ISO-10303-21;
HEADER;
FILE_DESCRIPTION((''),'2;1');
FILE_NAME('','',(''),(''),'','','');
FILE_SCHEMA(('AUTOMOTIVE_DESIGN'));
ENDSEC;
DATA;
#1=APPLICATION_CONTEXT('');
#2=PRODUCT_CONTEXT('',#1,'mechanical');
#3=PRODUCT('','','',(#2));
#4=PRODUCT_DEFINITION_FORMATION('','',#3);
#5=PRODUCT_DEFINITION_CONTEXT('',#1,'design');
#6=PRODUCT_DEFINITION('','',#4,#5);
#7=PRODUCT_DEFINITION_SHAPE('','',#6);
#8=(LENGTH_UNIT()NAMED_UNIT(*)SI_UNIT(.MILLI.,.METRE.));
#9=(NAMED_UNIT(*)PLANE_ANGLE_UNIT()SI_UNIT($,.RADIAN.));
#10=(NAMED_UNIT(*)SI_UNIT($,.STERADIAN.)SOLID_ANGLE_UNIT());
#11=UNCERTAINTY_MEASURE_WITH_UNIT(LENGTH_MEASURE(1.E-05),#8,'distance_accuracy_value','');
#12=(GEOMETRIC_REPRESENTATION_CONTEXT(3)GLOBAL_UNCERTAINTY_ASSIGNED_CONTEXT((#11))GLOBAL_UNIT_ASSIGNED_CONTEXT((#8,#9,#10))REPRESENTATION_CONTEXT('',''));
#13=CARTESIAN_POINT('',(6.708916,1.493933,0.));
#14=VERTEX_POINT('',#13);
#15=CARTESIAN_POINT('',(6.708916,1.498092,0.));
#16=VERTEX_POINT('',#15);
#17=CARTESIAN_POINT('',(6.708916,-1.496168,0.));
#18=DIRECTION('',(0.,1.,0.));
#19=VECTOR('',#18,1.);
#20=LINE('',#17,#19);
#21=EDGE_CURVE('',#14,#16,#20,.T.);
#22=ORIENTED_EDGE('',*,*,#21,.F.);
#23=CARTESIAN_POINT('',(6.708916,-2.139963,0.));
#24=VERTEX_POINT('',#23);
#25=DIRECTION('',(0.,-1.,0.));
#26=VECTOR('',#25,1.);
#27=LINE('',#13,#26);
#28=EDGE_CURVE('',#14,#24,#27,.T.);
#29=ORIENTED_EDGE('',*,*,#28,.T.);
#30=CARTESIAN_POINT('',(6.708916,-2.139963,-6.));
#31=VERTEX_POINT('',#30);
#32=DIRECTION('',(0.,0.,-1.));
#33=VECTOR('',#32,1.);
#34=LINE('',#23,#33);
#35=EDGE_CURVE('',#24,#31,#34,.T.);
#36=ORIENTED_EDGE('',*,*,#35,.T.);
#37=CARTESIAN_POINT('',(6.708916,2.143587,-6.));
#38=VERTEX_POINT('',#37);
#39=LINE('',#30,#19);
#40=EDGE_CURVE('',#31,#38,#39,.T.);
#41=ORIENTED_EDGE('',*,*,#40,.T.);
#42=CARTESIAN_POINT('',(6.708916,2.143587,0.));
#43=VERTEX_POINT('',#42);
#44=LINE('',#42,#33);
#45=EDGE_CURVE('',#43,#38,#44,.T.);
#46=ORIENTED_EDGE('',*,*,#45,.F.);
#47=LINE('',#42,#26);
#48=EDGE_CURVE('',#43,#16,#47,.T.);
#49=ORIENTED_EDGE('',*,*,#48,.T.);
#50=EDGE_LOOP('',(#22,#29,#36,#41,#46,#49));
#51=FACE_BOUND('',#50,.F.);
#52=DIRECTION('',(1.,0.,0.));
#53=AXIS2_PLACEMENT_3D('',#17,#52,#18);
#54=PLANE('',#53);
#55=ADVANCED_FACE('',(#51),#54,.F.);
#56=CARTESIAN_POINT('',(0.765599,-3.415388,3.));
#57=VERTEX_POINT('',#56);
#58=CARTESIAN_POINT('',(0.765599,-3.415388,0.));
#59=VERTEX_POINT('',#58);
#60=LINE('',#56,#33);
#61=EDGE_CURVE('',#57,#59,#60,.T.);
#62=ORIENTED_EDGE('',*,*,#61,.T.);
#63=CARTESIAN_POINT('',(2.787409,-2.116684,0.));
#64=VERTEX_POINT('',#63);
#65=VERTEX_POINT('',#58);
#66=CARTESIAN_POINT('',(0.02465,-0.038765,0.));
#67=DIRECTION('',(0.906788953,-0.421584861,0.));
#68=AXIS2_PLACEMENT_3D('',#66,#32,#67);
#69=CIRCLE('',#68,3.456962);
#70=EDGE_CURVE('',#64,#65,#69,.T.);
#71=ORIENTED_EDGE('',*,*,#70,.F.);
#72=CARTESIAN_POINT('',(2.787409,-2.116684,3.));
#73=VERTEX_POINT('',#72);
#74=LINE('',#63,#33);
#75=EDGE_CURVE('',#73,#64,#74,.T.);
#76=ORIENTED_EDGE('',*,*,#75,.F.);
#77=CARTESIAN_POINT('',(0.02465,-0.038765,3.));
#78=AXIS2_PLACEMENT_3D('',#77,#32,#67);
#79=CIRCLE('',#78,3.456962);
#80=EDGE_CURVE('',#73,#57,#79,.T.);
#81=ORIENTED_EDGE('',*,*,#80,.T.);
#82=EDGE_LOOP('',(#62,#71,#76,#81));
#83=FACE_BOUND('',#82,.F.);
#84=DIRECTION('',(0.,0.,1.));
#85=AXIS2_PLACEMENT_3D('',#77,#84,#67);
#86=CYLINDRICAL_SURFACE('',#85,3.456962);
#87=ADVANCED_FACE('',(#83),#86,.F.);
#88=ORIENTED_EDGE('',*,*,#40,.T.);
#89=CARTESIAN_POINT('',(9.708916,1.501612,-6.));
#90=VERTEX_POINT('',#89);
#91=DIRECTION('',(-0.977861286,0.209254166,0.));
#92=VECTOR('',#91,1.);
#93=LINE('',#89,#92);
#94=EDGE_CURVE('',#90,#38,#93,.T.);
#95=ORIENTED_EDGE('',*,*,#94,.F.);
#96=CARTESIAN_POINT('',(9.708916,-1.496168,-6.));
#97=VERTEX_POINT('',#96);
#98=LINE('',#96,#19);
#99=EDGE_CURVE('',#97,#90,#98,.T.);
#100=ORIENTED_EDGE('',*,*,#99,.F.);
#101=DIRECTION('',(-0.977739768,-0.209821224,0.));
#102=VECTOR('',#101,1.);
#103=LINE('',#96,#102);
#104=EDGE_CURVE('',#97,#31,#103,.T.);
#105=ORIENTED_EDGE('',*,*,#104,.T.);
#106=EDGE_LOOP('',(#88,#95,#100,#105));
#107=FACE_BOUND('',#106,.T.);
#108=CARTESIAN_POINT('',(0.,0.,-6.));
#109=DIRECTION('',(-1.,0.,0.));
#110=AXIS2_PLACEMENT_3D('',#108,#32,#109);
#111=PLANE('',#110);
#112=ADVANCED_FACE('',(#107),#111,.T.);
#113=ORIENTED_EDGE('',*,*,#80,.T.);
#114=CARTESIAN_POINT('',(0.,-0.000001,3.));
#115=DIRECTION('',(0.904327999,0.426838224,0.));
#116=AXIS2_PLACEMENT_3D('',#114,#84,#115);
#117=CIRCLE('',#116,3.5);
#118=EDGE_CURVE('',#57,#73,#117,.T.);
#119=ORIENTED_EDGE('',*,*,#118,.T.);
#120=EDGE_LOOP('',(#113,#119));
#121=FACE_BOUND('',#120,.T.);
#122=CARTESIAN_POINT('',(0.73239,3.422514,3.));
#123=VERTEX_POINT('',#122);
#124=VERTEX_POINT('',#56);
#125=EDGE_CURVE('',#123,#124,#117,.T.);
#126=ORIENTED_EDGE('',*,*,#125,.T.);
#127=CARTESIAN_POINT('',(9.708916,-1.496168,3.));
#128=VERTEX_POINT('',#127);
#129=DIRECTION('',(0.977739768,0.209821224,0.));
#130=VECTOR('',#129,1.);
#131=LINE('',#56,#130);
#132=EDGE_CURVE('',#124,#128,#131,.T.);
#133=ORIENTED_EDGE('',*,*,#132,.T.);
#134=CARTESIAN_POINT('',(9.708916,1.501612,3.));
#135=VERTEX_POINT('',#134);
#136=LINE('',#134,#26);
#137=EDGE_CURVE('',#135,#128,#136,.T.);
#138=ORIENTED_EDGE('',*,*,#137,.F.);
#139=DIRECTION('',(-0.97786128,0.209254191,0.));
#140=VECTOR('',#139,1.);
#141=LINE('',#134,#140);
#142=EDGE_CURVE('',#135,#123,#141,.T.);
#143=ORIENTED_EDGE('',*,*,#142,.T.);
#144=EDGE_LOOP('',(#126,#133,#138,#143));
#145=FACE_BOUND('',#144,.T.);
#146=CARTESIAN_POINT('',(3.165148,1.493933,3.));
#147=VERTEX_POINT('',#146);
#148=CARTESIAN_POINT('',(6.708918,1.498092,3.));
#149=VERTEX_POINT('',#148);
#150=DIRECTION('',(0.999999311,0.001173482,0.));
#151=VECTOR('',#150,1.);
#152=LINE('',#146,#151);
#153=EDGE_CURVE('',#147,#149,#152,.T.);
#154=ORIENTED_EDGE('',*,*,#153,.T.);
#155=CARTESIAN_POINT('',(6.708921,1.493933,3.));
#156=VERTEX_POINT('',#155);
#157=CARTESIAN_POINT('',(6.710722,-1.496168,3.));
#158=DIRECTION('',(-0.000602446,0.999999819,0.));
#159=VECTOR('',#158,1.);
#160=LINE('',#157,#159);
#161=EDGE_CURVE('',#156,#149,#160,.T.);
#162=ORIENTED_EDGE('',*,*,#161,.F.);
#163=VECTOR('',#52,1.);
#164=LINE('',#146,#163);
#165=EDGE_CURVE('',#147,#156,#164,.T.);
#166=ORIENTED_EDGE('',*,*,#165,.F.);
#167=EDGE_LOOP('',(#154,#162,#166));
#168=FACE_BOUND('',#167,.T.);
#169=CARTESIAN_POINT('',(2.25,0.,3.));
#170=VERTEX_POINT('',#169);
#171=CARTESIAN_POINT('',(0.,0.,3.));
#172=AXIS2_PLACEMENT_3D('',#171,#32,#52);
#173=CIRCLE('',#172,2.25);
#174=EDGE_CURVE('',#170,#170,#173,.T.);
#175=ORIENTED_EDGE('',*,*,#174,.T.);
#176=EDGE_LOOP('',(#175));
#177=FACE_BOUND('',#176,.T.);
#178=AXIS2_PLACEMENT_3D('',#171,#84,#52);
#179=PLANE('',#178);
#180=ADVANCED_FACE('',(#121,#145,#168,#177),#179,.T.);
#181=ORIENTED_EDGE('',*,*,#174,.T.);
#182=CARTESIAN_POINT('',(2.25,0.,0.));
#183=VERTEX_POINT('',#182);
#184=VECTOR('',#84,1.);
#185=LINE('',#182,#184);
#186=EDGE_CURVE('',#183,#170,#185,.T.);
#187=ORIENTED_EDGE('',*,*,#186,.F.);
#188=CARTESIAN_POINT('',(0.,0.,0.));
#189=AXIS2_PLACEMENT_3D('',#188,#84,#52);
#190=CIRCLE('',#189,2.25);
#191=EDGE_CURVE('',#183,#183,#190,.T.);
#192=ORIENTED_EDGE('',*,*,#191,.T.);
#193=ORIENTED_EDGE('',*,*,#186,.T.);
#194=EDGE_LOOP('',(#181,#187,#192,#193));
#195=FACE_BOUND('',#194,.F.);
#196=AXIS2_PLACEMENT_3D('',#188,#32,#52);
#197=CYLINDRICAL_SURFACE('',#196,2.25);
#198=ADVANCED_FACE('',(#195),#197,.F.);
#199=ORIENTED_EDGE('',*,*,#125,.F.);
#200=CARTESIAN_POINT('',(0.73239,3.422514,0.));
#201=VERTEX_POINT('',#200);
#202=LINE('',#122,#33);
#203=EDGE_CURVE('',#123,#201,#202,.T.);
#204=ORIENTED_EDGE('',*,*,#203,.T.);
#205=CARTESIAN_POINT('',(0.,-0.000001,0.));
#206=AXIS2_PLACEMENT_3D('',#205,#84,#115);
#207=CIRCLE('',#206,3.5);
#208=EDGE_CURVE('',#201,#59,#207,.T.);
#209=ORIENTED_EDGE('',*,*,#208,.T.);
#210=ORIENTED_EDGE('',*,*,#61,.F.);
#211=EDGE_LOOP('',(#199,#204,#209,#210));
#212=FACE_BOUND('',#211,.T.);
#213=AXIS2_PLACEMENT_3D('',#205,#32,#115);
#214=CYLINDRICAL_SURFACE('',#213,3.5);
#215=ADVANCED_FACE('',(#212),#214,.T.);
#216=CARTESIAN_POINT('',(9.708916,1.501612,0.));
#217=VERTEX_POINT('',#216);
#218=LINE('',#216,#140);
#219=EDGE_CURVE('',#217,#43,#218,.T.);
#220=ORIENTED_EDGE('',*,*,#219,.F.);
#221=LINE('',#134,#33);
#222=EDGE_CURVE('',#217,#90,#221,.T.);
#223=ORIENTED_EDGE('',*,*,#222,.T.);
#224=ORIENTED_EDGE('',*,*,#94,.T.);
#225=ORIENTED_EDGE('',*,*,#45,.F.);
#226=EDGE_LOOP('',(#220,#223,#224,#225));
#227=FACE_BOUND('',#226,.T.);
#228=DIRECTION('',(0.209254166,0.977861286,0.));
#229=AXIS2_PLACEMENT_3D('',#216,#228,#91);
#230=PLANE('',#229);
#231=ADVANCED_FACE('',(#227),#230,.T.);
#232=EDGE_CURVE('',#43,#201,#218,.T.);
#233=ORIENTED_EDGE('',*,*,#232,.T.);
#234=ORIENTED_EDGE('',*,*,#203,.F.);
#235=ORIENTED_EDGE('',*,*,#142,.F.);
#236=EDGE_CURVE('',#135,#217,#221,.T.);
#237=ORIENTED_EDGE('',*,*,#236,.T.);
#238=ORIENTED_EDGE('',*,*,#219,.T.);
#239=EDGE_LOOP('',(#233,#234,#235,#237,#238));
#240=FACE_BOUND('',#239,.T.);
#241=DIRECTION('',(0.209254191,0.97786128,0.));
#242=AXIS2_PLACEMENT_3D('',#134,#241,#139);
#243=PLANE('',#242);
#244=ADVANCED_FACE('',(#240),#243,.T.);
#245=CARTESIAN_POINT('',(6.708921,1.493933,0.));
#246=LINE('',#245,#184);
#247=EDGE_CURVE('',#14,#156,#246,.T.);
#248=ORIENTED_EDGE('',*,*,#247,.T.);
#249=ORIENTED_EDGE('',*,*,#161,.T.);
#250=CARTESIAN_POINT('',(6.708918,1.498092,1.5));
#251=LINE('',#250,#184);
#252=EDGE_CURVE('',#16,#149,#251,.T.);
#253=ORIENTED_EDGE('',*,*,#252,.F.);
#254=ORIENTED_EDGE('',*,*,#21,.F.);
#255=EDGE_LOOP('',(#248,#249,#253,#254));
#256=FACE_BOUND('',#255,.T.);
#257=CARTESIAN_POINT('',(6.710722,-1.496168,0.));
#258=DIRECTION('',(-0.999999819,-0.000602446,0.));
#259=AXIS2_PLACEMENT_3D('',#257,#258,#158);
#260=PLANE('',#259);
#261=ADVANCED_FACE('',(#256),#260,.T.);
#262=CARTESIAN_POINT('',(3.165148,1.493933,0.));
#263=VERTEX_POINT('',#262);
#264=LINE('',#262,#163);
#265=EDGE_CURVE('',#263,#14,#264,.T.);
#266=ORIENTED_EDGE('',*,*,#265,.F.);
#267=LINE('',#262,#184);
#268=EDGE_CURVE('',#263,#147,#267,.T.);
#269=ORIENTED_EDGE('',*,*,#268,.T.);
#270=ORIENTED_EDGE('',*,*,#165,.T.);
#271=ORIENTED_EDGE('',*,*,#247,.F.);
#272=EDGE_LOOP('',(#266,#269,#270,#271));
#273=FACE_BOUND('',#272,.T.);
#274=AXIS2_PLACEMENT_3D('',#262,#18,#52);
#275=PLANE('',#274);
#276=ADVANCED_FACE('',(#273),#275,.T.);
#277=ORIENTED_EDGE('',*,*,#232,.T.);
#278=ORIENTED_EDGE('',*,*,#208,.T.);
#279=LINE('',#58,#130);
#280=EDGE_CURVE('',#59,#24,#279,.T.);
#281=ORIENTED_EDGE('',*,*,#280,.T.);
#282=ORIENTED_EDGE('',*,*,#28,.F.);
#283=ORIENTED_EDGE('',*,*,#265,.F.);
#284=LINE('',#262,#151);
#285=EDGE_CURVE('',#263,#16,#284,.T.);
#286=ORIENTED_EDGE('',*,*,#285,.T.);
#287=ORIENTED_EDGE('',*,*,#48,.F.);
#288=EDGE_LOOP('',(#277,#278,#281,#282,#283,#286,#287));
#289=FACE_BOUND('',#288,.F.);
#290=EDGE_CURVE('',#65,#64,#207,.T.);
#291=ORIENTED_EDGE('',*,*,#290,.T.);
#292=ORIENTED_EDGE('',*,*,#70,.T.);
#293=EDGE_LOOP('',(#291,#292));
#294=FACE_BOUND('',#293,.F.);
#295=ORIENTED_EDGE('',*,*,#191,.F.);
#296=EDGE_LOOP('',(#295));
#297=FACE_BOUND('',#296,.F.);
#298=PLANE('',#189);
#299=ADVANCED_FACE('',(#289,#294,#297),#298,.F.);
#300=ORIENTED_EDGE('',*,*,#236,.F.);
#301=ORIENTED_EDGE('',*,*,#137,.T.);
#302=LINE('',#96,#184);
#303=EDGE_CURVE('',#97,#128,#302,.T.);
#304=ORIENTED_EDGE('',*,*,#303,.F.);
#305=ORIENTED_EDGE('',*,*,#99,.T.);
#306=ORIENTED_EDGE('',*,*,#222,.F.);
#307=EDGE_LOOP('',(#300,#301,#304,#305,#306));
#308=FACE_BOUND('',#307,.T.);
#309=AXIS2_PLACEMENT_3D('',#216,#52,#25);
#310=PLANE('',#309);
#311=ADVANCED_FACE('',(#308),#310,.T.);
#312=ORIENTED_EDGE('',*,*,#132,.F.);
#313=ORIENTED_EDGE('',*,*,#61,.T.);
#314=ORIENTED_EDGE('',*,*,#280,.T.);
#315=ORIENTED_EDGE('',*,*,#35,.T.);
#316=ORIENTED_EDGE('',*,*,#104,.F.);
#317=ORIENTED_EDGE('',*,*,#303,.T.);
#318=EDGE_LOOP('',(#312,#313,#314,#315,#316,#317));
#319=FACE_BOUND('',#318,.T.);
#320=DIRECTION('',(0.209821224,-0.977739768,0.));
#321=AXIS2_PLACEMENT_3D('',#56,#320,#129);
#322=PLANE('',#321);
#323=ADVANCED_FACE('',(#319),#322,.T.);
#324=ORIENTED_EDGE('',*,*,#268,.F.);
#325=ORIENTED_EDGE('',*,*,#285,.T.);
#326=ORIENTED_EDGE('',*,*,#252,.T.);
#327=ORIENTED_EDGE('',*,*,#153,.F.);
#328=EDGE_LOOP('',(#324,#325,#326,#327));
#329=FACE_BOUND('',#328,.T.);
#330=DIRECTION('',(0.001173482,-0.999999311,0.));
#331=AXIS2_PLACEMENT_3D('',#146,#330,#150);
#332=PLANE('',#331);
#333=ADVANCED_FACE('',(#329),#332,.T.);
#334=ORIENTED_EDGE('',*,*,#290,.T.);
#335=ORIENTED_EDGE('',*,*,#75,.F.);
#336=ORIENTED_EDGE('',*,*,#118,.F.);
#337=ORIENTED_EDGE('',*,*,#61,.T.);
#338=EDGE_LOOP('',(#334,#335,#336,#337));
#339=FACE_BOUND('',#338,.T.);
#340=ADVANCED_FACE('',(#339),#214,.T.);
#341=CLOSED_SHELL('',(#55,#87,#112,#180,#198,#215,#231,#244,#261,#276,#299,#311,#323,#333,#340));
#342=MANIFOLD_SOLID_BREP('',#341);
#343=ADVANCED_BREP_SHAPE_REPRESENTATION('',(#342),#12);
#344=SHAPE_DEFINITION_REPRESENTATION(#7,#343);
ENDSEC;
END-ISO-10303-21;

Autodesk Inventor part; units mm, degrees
ref_plane "YZ Plane" through (0, 0, 0) normal (1, 0, 0) x (0, 1, 0)
ref_plane "XZ Plane" through (0, 0, 0) normal (0, 1, 0) x (-1, 0, 0)
ref_plane "XY Plane" through (0, 0, 0) normal (0, 0, 1) x (1, 0, 0)
sketch "Sketch1" plane through (0, 0, 0) normal (0, 0, 1) x (1, 0, 0)
  circle A0 centre (0, 0) radius 2.25
  arc A1 (3.165148, 1.493933) -> (3.159393, -1.506067) centre (0, 0) ccw
  line L0 (6.72439, -1.506067) -> (3.159393, -1.506067)
  line L1 (-0.27561, 3.050761) -> (6.72439, 3.050761) construction
  line L2 (1.598572, 1.503832) -> (1.673616, 1.503832)
  line L3 (3.165148, 1.493933) -> (6.72439, 1.493933)
  line L4 (6.72439, -1.506067) -> (6.72439, 1.493933)
  line L5 (6.72439, 1.493933) -> (6.72439, -1.506067)
  point P0 (7.357739, 0.5858)
  point P1 (6.72439, -0.006067)
  dimension "d0" = 4.5
  dimension "d1" = 7
  dimension "d3" = 7
  dimension "d13" = 3
extrude "Extrusion1" add sketch "Sketch1" along normal blind 3
sketch "Sketch2" plane through (0, 0, 0) normal (0, 0, -1) x (-1, 0, 0)
  line L0 (-6.708916, -1.496168) -> (-9.708916, -1.496168)
  line L1 (-9.708916, -1.496168) -> (-9.708916, 1.501612)
  line L2 (-9.708916, 1.501612) -> (-6.708916, 1.501612)
  line L3 (-6.708916, -1.496168) -> (-6.708916, 1.501612)
  line L4 (-3.159393, -1.506067) -> (-6.72439, -1.506067)
  point P0 (0, 0)
  point P1 (-9.708916, 0.002722)
  point P2 (-2.307375, -1.496168)
  point P3 (-6.72439, -1.506067)
  dimension "d7" = 3
extrude "Extrusion2" add sketch "Sketch2" along normal blind 6
sketch "Sketch6" plane through (0, 0, 0) normal (0, 0, 1) x (1, 0, 0)
  line L0 (6.708916, 1.501612) -> (9.708916, 1.501612)
  line L1 (9.708916, -1.496168) -> (6.72439, -1.496168)
  line L2 (6.710722, 1.501612) -> (9.708916, 1.501612)
  line L3 (9.708916, 1.501612) -> (9.708916, -1.496168)
  line L4 (9.708916, -1.496168) -> (6.710722, -1.496168)
  line L5 (6.710722, -1.496168) -> (6.710722, 1.501612)
  point P0 (0, 0)
extrude "Extrusion5" add sketch "Sketch6" along normal blind 3
sketch "Sketch8" plane through (0, 0, 3) normal (0, 0, 1) x (1, 0, 0)
  line L0 (9.708916, -1.496168) -> (9.708916, 1.501612)
  line L1 (9.708916, 1.501612) -> (0.73239, 3.422514)
  line L2 (9.708916, -1.496168) -> (0.734374, -3.422089)
  arc A0 (3.165148, 1.493933) -> (0.73239, 3.422514) centre (0, 0) ccw
  line L3 (9.708916, 1.501612) -> (3.165148, 1.493933)
  line L4 (3.159385, -1.496168) -> (9.708916, -1.496168)
  arc A1 (0.734374, -3.422089) -> (3.159385, -1.496168) centre (0.024651, -0.038766) ccw
  point P0 (0, 0)
  point P1 (3.159393, -1.506067)
  point P2 (0.765599, -3.415388)
sketch "Sketch8 outline for Extrusion7" plane through (0, 0, 3) normal (0, 0, 1) x (1, 0, 0)
  line L0 (0.765599, -3.415388) -> (9.708916, -1.496168)
  arc A0 (3.159385, -1.496168) -> (0.765599, -3.415388) centre (0.024651, -0.038766) cw
  line L1 (9.708916, -1.496168) -> (3.159385, -1.496168)
  line L2 (3.165148, 1.493933) -> (9.708916, 1.501612)
  arc A1 (0.73239, 3.422514) -> (3.165148, 1.493933) centre (0, 0) cw
  line L3 (9.708916, 1.501612) -> (0.73239, 3.422514)
extrude "Extrusion7" add sketch "Sketch8 outline for Extrusion7" against normal blind 3
sketch "Sketch9" plane through (0, 0, 0) normal (0, 0, -1) x (-1, 0, 0)
  line L0 (-6.708916, -1.496168) -> (-6.708916, 1.501612)
  line L1 (-6.708916, 1.501612) -> (-6.708916, 2.143587)
  line L2 (-6.708916, 1.501612) -> (-9.708916, 1.501612)
  line L3 (-9.708916, 1.501612) -> (-6.708916, 2.143587)
  line L4 (-6.708916, 1.501612) -> (-9.708916, 1.501612)
  line L5 (-6.708916, -1.496168) -> (-6.708916, -2.139963)
  line L6 (-9.708916, -1.496168) -> (-0.765599, -3.415388)
  line L7 (-9.708916, -1.496168) -> (-6.708916, -1.496168)
  line L8 (-9.708916, -1.496168) -> (-6.708916, -1.496168)
  line L9 (-9.708916, -1.496168) -> (-6.708916, -2.139963)
  point P0 (0, 0)
extrude "Extrusion8" add sketch "Sketch9" along normal blind 6
properties part number "small pulley cable retainers"
